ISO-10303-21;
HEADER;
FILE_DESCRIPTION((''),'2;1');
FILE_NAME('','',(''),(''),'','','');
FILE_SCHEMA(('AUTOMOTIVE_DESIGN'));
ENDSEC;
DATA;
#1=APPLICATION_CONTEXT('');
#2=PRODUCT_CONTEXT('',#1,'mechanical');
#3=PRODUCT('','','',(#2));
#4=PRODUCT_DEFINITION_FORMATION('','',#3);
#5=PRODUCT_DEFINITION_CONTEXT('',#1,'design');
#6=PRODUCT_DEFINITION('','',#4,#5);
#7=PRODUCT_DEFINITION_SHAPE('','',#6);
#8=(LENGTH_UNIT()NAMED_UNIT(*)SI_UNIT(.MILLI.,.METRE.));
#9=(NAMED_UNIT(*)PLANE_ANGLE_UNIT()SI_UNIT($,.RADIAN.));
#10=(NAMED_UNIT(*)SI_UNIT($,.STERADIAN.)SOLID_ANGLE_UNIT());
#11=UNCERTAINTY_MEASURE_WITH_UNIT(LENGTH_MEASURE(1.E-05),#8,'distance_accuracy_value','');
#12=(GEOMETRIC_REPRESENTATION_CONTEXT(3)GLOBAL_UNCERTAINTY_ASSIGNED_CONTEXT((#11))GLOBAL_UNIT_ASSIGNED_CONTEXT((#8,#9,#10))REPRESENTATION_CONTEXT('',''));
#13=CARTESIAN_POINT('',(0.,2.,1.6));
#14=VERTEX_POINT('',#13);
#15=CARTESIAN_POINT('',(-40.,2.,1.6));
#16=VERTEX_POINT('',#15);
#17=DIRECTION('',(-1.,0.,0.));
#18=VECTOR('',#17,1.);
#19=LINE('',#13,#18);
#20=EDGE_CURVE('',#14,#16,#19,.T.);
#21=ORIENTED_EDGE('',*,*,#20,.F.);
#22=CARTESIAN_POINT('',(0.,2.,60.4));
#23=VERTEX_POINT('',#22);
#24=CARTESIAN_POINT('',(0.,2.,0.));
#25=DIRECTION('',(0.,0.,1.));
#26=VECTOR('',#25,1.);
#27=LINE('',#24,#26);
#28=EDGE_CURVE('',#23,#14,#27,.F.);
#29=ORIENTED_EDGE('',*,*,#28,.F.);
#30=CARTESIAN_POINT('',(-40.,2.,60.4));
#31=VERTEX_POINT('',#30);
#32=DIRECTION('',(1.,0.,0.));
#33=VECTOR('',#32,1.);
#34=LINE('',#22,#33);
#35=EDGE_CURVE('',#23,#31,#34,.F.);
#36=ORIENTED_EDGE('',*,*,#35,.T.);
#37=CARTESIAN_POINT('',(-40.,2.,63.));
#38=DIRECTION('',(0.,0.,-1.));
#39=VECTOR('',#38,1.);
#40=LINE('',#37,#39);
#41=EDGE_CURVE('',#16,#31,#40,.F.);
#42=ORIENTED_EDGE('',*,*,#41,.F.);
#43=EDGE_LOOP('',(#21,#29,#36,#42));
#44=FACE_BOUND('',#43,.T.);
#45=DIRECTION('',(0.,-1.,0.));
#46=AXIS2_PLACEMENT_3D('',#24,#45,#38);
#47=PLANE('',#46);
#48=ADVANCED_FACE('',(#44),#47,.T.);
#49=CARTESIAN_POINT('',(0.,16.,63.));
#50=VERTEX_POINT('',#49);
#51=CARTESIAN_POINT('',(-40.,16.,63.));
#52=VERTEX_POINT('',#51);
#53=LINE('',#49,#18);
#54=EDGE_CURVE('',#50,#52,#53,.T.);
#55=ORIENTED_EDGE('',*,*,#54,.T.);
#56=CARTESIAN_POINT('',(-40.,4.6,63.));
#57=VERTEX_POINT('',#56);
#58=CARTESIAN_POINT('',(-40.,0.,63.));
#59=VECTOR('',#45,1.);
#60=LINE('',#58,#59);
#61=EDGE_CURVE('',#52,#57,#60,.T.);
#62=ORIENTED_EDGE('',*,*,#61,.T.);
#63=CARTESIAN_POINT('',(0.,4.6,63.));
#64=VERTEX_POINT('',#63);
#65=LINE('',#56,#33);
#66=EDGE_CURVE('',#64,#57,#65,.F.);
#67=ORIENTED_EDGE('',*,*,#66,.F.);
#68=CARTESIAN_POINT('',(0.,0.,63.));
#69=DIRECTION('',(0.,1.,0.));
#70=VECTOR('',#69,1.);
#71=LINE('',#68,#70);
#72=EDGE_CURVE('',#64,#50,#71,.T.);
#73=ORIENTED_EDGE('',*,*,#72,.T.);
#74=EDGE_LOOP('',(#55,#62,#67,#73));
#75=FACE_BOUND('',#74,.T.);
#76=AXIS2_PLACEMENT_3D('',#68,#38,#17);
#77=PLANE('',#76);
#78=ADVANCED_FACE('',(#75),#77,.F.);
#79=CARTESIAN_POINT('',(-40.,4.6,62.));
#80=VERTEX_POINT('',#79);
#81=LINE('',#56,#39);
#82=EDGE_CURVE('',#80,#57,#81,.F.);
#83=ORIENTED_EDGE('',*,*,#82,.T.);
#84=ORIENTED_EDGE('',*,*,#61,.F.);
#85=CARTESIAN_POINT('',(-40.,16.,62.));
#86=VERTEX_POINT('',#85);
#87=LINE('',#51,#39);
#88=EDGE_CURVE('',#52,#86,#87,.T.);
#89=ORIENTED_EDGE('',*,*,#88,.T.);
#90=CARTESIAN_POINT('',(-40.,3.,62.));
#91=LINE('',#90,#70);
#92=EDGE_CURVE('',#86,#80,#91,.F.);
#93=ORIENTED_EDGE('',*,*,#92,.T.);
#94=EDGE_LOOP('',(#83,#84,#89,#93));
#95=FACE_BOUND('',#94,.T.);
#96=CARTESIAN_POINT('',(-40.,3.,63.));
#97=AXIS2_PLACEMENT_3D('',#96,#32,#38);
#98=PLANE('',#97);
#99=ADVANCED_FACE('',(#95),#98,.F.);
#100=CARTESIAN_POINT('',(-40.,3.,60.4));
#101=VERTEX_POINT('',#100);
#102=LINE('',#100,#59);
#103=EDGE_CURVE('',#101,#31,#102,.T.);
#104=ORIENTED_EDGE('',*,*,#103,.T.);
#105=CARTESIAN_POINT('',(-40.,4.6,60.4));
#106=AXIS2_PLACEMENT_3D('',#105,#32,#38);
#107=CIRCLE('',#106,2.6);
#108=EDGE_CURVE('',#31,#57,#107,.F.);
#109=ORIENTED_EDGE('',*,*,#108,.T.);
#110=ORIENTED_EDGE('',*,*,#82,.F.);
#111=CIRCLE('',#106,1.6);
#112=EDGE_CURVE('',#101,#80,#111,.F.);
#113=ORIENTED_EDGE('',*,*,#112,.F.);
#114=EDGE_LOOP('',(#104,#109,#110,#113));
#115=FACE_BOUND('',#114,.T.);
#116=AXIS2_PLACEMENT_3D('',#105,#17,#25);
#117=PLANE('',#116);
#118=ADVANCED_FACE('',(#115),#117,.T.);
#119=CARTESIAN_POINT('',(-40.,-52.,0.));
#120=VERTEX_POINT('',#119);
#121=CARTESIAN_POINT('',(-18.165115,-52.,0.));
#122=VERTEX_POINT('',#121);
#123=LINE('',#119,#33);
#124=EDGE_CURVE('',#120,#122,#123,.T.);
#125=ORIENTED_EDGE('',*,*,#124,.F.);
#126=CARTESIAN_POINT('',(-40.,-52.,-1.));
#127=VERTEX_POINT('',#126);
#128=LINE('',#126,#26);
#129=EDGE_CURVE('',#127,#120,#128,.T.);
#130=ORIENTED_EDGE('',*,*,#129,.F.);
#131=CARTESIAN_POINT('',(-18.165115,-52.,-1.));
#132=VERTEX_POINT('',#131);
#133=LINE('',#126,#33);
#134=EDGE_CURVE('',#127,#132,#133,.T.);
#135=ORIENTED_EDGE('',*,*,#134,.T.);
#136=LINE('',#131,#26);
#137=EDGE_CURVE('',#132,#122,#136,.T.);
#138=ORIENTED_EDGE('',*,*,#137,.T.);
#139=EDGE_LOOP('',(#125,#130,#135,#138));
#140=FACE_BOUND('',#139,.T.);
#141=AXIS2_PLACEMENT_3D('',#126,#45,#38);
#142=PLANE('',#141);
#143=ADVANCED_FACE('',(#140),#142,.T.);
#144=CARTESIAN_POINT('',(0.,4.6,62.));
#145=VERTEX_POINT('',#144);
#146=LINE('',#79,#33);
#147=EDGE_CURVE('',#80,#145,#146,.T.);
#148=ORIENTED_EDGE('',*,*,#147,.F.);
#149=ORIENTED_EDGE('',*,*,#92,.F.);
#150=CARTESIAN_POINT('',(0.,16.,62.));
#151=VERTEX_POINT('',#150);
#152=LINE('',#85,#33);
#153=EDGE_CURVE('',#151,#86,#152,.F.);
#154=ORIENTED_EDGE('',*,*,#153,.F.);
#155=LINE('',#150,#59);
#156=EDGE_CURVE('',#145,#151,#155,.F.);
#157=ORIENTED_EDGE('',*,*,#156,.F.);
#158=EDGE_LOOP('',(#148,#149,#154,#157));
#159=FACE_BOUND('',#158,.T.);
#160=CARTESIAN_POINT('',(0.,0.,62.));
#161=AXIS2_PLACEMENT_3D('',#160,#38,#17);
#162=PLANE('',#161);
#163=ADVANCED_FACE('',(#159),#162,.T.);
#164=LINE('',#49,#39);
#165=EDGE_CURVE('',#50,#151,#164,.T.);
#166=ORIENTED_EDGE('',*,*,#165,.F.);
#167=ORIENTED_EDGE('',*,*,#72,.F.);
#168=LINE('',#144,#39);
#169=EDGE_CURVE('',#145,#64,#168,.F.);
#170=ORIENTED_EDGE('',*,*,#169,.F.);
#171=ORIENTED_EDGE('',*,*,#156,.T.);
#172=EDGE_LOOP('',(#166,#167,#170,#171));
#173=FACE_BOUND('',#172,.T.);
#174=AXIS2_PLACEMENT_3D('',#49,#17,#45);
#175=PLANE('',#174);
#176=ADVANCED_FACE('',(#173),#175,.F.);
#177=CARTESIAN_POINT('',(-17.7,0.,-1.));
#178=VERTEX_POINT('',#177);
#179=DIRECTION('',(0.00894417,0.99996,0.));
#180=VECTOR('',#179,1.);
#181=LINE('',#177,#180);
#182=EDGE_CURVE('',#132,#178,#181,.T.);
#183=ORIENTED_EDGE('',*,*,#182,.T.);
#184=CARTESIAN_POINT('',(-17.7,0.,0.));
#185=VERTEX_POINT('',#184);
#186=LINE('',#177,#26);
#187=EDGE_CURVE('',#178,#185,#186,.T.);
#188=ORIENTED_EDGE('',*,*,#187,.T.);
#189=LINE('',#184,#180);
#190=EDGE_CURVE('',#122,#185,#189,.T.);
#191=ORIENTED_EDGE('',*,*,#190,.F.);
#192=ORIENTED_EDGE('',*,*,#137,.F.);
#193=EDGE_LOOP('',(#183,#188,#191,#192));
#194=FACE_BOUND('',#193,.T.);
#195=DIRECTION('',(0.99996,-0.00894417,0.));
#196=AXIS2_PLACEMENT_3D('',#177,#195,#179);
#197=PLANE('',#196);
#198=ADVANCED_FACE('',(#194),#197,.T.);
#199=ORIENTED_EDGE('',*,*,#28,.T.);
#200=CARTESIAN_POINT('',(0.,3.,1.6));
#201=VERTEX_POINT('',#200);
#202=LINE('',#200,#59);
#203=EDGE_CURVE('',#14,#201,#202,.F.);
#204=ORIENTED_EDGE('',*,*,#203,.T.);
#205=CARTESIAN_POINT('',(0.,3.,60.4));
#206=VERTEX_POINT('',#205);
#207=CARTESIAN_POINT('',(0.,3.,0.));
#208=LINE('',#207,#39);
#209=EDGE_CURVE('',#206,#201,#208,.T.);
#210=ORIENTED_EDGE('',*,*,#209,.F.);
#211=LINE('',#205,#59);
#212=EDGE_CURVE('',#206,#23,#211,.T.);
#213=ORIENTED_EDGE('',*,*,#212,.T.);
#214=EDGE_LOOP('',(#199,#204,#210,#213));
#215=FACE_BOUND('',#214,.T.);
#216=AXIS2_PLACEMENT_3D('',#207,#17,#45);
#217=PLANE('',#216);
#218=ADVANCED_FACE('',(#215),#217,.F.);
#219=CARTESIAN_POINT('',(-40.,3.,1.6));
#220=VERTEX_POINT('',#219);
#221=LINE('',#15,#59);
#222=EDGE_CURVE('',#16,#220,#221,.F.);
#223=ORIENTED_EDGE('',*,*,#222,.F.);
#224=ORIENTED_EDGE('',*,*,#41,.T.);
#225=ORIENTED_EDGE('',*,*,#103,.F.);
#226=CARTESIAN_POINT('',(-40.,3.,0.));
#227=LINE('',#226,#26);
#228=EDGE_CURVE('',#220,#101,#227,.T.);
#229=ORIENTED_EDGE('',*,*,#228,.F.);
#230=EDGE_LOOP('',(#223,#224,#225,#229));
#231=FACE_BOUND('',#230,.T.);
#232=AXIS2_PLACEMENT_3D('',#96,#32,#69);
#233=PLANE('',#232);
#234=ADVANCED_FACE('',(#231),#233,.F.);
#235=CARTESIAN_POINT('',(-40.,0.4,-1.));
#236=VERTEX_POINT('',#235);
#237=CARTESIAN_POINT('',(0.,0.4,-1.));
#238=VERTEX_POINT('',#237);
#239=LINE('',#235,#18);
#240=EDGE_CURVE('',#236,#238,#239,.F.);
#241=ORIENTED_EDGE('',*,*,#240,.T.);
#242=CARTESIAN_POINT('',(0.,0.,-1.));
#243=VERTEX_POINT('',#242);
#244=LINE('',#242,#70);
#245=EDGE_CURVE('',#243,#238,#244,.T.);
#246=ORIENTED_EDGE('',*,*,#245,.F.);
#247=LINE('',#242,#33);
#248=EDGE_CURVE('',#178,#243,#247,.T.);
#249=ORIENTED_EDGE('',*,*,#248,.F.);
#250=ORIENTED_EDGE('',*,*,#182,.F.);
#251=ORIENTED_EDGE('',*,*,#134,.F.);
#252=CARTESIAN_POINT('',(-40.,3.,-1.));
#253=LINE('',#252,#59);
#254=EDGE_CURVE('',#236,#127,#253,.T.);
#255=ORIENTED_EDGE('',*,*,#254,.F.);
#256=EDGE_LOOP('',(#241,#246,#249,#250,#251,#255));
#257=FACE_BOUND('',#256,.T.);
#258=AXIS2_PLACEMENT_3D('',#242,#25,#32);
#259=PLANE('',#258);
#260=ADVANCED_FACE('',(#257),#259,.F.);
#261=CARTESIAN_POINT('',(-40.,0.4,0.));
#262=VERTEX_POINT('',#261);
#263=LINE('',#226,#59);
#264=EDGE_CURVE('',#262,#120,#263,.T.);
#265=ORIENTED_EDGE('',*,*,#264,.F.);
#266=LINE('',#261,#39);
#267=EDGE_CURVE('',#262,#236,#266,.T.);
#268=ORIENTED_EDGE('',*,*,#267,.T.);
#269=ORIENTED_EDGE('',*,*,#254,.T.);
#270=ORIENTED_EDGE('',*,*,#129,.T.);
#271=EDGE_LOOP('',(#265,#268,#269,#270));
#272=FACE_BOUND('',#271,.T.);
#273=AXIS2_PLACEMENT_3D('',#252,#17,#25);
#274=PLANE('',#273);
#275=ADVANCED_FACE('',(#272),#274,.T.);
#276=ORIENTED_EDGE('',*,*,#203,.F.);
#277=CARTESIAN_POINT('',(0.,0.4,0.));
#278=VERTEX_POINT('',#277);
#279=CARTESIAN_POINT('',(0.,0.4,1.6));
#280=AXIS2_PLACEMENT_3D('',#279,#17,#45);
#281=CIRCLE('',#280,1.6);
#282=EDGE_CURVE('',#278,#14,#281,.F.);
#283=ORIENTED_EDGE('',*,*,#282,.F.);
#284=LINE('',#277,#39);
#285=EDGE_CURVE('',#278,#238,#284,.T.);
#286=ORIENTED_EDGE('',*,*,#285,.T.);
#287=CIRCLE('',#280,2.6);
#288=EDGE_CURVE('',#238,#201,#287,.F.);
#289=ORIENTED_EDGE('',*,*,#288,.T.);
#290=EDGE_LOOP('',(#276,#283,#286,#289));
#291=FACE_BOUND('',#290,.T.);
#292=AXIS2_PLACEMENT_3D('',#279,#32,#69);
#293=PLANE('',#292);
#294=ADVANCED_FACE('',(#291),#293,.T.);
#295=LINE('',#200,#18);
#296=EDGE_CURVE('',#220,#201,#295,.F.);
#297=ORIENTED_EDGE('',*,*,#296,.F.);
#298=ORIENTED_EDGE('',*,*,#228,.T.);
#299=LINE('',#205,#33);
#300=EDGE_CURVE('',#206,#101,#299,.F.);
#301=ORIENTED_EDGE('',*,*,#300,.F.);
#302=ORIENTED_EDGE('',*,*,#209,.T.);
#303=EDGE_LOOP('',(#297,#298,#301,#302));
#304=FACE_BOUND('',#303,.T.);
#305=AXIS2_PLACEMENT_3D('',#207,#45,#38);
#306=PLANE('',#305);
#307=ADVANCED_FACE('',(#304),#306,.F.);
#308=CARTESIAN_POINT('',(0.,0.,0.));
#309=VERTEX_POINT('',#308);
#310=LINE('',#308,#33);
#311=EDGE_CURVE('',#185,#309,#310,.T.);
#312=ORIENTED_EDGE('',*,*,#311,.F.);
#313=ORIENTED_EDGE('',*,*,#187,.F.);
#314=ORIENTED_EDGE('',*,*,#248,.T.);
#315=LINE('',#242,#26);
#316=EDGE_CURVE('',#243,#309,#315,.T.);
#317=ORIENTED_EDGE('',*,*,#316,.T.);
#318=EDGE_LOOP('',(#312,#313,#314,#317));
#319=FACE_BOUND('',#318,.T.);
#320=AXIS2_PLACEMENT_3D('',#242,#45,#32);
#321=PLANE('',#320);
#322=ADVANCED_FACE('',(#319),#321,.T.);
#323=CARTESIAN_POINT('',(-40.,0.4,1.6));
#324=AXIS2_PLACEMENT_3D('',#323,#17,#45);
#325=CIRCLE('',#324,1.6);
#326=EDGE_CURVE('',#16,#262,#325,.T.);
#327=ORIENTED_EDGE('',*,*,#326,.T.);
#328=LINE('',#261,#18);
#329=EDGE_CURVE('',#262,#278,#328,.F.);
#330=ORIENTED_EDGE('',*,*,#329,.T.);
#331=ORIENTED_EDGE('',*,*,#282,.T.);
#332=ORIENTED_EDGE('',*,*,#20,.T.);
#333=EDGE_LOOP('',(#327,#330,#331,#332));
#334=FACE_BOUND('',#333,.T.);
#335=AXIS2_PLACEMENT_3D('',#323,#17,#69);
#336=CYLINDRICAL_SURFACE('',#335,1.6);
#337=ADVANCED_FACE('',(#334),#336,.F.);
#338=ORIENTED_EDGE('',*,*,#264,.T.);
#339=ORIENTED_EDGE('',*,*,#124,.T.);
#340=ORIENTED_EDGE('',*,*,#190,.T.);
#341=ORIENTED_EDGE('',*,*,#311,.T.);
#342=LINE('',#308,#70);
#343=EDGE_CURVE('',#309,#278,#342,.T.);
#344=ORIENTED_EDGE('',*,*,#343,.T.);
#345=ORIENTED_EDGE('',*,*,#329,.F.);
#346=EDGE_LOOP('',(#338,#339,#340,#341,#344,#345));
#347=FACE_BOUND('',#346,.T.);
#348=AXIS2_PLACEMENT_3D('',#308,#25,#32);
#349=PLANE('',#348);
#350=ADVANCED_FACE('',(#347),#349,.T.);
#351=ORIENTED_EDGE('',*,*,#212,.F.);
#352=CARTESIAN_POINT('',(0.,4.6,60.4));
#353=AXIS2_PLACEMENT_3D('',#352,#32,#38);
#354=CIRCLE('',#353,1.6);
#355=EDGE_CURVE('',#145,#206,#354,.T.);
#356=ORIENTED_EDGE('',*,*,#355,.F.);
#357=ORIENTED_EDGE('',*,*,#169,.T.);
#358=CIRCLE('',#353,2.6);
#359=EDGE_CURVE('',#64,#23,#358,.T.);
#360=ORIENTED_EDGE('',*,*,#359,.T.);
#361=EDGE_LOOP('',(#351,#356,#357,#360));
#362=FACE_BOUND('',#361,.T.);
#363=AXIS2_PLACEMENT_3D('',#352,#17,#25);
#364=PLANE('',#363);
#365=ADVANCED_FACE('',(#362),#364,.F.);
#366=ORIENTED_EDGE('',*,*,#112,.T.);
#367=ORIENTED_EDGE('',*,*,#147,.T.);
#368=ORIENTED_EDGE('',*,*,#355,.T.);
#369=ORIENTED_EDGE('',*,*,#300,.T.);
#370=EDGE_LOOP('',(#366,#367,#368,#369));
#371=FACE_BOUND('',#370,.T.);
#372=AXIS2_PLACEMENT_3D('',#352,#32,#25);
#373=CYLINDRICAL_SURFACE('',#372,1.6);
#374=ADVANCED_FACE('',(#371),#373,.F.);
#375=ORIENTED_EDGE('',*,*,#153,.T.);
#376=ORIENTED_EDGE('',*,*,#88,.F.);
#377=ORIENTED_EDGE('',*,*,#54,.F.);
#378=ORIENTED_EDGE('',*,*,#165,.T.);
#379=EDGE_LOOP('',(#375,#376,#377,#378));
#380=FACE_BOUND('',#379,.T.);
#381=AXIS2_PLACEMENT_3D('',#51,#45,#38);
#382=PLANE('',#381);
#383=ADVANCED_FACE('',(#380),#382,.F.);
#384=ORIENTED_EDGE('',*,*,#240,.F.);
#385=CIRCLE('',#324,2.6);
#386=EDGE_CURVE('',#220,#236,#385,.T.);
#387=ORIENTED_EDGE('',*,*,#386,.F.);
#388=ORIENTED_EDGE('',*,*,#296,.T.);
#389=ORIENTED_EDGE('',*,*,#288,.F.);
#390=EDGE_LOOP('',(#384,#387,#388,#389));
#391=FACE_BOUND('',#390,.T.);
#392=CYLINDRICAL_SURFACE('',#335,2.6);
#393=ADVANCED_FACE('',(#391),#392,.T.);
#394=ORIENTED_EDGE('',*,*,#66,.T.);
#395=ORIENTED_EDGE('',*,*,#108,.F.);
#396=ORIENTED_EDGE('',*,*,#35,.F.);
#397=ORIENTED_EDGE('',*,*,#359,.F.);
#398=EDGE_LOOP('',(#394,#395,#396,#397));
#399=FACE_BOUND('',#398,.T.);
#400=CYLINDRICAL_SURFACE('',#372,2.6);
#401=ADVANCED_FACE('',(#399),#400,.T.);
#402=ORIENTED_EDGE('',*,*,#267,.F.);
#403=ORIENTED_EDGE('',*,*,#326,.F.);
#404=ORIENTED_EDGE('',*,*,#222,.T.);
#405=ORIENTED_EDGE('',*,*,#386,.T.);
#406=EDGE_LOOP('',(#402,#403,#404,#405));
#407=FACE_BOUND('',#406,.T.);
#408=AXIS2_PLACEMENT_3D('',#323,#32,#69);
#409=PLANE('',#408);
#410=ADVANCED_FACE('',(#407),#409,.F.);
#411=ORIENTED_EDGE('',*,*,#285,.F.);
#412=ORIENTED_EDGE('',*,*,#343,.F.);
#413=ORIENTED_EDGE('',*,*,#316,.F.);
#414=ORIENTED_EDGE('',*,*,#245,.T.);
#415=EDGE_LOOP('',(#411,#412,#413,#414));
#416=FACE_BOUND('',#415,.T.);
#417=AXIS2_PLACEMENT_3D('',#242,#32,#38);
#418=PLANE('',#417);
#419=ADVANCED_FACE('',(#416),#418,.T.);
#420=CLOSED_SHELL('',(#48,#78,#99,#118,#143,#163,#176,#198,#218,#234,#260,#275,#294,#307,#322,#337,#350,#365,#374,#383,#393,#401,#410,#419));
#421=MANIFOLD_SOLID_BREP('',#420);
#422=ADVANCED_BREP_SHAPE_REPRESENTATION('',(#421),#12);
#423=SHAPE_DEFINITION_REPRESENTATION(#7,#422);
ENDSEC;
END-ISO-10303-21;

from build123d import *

# Parameters (mm, degrees)
BASE_FLANGE1_DEPTH           = 1
EDGE_FLANGE1_STRIP_W         = 7.2
EDGE_FLANGE1_STRIP_H         = 1
EDGE_FLANGE1_STRIP_CUT_DEPTH = 40
EDGE_FLANGE1_DEPTH           = 40
EDGE_FLANGE2_STRIP_W         = 7.2
EDGE_FLANGE2_STRIP_H         = 1
EDGE_FLANGE2_STRIP_CUT_DEPTH = 40
EDGE_FLANGE2_DEPTH           = 40


# Sheet-metal steps are written as plain solids
with BuildPart() as part:
    # Sketch1 → Base-Flange1 (new body)
    with BuildSketch(Plane.XY):
        Polygon((0, 0), (0, 3), (-40, 3), (-40, -52), (-18.16511543, -52), (-17.7, 0), align=None)
    extrude(amount=-BASE_FLANGE1_DEPTH)

    # Edge-Flange1 strip (across the edge) → Edge-Flange1 strip cut (cut)
    with BuildSketch(Plane(origin=(0, 3, 0), x_dir=(0, -1, 0), z_dir=(-1, 0, 0))):
        with Locations((-1, -0.5)):
            Rectangle(EDGE_FLANGE1_STRIP_W, EDGE_FLANGE1_STRIP_H)
    extrude(amount=EDGE_FLANGE1_STRIP_CUT_DEPTH, mode=Mode.SUBTRACT)

    # Edge-Flange1 section (across the edge) → Edge-Flange1 (add)
    with BuildSketch(Plane(origin=(0, 3, 0), x_dir=(0, -1, 0), z_dir=(-1, 0, 0))):
        with BuildLine():
            Line((0, 1.6), (0, 63))
            Line((0, 63), (1, 63))
            Line((1, 63), (1, 1.6))
            ThreePointArc((1, 1.6), (1.46862915, 0.46862915), (2.6, 0))
            Line((2.6, 0), (2.6, -1))
            ThreePointArc((2.6, -1), (0.761522369, -0.238477631), (0, 1.6))
        make_face()
    extrude(amount=EDGE_FLANGE1_DEPTH)

    # Edge-Flange2 strip (across the edge) → Edge-Flange2 strip cut (cut)
    with BuildSketch(Plane(origin=(-40, 3, 63), x_dir=(0, 0, -1), z_dir=(1, 0, 0))):
        with Locations((-1, -0.5)):
            Rectangle(EDGE_FLANGE2_STRIP_W, EDGE_FLANGE2_STRIP_H)
    extrude(amount=EDGE_FLANGE2_STRIP_CUT_DEPTH, mode=Mode.SUBTRACT)

    # Edge-Flange2 section (across the edge) → Edge-Flange2 (add)
    with BuildSketch(Plane(origin=(-40, 3, 63), x_dir=(0, 0, -1), z_dir=(1, 0, 0))):
        with BuildLine():
            Line((0, 1.6), (0, 13))
            Line((0, 13), (1, 13))
            Line((1, 13), (1, 1.6))
            ThreePointArc((1, 1.6), (1.46862915, 0.46862915), (2.6, 0))
            Line((2.6, 0), (2.6, -1))
            ThreePointArc((2.6, -1), (0.761522369, -0.238477631), (0, 1.6))
        make_face()
    extrude(amount=EDGE_FLANGE2_DEPTH)


solid = part.part
